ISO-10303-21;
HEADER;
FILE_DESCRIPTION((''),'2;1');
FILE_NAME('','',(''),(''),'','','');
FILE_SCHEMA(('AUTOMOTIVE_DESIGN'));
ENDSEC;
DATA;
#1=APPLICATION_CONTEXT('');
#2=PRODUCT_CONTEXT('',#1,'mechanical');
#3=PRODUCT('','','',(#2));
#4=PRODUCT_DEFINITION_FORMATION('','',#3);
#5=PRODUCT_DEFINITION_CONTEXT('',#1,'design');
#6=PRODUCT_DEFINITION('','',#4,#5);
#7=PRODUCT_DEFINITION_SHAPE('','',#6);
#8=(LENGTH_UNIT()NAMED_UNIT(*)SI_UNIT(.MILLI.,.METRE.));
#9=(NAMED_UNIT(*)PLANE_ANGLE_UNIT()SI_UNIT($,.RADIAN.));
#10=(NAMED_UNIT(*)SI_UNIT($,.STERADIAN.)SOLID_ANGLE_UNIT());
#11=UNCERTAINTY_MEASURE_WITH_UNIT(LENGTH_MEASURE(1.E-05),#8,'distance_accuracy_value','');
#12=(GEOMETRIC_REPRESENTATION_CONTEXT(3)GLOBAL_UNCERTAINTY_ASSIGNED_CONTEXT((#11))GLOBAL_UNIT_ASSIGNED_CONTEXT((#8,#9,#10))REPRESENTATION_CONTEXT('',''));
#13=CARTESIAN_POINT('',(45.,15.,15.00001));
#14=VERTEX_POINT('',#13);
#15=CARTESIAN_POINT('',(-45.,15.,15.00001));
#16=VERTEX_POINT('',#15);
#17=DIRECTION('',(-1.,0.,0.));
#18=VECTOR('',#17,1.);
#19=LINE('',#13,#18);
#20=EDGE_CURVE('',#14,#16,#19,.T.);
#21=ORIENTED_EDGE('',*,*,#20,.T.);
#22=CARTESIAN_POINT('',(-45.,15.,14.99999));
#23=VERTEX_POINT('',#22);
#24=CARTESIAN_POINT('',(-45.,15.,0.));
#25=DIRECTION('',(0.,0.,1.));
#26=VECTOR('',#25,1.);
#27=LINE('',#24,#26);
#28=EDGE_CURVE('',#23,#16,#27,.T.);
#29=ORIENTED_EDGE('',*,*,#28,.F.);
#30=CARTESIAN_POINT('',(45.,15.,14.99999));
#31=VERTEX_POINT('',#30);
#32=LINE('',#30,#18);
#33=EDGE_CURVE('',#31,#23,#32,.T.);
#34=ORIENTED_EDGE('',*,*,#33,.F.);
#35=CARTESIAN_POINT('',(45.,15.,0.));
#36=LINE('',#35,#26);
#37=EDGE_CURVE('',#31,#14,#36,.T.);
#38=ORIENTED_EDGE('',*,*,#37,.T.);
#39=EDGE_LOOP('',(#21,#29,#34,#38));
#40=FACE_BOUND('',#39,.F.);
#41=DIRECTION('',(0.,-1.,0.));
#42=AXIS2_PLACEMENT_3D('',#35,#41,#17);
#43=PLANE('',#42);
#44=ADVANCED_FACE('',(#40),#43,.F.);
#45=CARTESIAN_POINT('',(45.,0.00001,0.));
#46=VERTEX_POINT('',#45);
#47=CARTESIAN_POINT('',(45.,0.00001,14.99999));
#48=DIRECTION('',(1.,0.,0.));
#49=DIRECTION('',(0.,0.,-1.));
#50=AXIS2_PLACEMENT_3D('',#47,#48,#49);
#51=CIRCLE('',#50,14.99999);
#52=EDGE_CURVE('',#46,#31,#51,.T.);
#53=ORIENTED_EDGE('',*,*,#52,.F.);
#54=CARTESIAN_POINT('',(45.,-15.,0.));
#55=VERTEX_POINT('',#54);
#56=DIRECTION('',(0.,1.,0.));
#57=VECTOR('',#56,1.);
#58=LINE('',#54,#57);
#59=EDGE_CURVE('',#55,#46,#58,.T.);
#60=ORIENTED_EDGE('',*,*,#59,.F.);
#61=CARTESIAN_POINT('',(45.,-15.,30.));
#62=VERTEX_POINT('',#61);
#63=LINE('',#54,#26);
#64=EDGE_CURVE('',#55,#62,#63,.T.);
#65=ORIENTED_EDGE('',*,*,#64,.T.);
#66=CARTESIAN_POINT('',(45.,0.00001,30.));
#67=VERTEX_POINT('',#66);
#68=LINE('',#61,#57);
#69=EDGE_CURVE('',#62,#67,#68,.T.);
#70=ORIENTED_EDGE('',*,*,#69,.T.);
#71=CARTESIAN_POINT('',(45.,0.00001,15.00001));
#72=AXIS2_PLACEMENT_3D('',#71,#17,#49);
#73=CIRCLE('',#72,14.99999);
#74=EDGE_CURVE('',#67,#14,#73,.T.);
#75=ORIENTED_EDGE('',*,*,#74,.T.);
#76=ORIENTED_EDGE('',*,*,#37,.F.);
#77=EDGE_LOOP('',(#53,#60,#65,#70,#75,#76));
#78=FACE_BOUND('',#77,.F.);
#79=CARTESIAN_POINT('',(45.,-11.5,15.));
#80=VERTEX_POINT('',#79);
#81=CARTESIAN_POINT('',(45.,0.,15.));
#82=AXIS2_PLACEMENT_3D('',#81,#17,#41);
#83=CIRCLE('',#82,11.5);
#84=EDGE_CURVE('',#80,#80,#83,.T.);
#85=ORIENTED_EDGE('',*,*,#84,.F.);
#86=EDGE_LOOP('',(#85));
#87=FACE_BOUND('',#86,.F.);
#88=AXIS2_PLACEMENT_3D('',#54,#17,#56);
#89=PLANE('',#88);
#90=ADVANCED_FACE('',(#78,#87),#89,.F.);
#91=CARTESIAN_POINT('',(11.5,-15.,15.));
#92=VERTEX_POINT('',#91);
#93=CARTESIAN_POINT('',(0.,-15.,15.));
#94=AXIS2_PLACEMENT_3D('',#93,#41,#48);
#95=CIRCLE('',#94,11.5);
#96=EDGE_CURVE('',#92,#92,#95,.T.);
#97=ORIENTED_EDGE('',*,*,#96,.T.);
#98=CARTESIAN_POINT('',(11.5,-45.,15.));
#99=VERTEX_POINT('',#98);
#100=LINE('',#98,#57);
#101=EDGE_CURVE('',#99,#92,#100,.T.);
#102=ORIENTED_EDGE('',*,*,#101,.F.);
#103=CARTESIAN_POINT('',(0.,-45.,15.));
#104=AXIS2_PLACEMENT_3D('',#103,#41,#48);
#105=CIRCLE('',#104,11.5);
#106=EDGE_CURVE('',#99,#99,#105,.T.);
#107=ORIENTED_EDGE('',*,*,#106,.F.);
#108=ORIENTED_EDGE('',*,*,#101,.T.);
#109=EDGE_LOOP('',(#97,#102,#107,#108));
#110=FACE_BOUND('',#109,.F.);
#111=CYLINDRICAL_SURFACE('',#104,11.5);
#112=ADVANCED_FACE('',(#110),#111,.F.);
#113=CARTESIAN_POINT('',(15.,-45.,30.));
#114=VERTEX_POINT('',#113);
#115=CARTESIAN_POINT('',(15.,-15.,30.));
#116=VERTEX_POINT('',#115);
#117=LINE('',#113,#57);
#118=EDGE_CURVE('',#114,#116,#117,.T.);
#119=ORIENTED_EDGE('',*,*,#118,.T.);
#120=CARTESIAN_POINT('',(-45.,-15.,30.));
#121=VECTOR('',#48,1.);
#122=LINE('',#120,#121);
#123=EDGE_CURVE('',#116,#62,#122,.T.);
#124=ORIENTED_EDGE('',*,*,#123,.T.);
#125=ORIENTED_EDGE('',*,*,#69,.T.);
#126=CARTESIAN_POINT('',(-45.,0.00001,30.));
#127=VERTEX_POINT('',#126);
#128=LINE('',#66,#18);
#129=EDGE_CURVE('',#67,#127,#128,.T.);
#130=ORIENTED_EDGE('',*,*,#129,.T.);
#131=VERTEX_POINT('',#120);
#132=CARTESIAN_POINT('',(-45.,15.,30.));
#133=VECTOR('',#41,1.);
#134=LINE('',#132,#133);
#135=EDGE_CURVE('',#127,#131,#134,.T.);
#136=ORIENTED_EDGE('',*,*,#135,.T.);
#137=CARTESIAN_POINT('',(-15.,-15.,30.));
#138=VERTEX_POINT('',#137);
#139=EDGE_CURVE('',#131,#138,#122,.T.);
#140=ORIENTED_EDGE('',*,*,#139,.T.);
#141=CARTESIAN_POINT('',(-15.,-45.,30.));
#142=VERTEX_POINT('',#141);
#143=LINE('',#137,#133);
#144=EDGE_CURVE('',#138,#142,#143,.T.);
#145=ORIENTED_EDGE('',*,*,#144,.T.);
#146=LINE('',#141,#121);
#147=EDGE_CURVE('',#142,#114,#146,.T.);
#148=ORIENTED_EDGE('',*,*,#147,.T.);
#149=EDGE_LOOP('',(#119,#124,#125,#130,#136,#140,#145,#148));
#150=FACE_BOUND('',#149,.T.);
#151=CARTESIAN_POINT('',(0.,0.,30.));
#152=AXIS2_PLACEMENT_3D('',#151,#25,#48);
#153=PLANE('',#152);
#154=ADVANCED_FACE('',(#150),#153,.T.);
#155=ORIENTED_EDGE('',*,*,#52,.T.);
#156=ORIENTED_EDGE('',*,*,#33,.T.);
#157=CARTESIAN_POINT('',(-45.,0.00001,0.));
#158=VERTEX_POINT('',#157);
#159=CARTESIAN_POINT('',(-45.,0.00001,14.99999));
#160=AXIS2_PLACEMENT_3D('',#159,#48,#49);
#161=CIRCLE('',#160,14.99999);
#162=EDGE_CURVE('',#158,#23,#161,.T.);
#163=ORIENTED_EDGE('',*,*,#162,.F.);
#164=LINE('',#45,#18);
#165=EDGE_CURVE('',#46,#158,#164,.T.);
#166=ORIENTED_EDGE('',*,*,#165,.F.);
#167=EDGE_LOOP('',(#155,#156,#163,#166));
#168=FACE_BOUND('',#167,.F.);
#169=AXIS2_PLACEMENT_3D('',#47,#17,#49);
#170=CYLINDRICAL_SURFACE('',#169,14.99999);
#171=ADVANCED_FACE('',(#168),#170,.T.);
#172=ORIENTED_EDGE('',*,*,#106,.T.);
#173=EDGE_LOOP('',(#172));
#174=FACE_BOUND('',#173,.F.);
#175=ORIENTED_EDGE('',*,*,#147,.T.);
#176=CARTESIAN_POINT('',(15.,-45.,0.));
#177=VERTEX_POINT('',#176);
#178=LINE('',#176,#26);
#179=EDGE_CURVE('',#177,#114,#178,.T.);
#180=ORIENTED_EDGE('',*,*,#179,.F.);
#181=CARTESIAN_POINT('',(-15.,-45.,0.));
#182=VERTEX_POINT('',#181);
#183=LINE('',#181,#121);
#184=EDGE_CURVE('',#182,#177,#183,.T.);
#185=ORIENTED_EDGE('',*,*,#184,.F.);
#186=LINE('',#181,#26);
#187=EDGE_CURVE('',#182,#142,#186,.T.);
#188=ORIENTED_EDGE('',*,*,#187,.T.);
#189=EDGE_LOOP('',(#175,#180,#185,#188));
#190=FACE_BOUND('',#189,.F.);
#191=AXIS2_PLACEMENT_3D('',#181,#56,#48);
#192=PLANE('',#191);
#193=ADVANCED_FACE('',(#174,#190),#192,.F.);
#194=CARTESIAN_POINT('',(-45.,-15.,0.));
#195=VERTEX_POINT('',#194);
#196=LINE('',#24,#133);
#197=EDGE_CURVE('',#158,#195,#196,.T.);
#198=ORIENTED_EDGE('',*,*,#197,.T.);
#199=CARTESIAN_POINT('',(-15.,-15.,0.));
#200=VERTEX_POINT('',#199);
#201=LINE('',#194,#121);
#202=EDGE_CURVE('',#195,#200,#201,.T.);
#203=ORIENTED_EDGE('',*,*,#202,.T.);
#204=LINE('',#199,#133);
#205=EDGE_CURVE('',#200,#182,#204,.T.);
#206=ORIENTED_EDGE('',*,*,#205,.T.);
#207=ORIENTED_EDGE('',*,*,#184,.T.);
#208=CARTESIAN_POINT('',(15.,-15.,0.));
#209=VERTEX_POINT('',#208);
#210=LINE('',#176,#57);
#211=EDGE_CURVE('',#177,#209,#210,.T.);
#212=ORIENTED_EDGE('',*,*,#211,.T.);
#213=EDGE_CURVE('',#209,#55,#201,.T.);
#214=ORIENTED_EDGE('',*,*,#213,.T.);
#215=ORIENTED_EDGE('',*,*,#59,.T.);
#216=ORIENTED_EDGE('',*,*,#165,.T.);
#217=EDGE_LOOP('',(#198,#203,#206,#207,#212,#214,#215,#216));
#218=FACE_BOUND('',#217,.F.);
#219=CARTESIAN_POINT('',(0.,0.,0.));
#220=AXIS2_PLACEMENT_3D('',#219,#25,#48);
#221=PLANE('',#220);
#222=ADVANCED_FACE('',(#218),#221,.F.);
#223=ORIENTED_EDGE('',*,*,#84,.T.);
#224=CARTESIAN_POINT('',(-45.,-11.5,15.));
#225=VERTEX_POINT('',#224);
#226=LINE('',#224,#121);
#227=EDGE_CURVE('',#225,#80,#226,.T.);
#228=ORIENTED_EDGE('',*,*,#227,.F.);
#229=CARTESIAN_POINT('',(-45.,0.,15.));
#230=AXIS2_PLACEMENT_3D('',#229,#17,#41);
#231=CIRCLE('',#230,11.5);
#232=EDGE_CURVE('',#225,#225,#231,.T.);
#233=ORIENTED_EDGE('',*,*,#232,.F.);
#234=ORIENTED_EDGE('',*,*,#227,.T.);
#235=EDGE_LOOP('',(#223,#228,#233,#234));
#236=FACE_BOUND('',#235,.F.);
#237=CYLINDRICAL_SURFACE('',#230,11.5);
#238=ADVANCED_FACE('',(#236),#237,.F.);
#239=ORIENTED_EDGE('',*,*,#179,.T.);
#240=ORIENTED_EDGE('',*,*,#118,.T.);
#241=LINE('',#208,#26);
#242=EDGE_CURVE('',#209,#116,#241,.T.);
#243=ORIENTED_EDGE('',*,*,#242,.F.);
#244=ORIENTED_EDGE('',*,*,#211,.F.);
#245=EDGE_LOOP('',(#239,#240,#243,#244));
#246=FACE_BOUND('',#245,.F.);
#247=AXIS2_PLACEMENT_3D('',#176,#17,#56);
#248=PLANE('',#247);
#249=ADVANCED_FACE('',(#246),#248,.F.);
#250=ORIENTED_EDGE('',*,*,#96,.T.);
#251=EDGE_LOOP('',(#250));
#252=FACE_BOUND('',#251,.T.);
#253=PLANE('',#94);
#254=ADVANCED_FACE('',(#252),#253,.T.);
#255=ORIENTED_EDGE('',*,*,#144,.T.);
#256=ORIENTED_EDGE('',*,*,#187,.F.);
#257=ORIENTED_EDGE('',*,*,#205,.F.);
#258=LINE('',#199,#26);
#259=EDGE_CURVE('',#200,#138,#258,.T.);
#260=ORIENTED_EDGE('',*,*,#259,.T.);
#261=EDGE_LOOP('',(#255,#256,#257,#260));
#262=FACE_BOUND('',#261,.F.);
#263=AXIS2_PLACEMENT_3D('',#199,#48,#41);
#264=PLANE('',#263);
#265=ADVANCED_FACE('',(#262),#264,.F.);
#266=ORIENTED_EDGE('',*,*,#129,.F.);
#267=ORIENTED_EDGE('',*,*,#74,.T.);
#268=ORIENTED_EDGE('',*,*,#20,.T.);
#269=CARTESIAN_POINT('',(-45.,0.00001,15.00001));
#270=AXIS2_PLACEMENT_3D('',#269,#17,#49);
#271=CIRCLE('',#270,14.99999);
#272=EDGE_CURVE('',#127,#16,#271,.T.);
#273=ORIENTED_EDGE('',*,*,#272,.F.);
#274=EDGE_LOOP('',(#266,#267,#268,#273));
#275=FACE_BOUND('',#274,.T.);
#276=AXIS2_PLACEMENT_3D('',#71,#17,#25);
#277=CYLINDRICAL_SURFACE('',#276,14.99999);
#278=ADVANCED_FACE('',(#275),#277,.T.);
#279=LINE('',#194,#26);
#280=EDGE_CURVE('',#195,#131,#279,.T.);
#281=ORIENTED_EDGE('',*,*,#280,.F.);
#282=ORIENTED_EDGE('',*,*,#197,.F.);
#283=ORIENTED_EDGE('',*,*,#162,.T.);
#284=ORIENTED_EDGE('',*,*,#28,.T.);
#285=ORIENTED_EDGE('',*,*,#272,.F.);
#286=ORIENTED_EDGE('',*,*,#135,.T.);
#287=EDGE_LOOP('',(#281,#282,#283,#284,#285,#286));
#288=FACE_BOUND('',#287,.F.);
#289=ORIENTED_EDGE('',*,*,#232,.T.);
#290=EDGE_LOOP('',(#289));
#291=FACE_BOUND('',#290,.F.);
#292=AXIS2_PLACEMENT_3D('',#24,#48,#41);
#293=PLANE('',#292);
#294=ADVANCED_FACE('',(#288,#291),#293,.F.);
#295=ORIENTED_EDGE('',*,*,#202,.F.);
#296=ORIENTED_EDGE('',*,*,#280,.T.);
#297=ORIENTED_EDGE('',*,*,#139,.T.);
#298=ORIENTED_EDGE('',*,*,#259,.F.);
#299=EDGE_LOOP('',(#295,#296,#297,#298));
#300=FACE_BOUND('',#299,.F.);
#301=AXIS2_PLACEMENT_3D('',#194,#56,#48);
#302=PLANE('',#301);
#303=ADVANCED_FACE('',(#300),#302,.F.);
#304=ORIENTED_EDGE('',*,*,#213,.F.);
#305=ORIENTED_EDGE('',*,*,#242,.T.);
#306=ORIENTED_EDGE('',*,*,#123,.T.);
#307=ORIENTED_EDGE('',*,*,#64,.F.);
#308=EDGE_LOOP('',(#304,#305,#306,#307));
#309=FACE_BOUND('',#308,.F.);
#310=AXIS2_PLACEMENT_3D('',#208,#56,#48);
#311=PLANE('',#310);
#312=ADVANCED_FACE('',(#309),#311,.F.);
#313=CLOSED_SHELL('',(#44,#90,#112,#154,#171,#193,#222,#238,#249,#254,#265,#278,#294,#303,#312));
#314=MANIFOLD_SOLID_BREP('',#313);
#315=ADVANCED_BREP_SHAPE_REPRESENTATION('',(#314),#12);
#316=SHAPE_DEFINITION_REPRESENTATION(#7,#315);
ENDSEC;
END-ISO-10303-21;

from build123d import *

# Parameters (mm, degrees)
F1_DEPTH = 30
F3_R     = 11.5
F4_DEPTH = 30
F2_R     = 11.5
F5_DEPTH = 90
F6_R     = 14.99999


# Not quite as in the source:
# - a fillet or chamfer is up to 0.001 mm smaller than in the source, because OpenCascade refuses the exact size


with BuildPart() as f1:
    # F0 (on Top) → F1 (new body)
    with BuildSketch(Plane.XY):
        Polygon((15, -15), (45, -15), (45, 15), (-45, 15), (-45, -15), (-15, -15), align=None)
        Polygon((15, -45), (15, -15), (-15, -15), (-15, -45), (0, -45), align=None)
    extrude(amount=F1_DEPTH)

    # F3 (on face) → F4 (cut)
    with BuildSketch(Plane.XZ.offset(45)):
        with Locations((0, 15)):
            Circle(F3_R)
    extrude(amount=-F4_DEPTH, mode=Mode.SUBTRACT)

    # F2 (on face) → F5 (cut)
    with BuildSketch(Plane(origin=(-45, 0, 0), x_dir=(0, -1, 0), z_dir=(-1, 0, 0))):
        with Locations((0, 15)):
            Circle(F2_R)
    extrude(amount=-F5_DEPTH, mode=Mode.SUBTRACT)

    # F6 (radius 15 in the source; OpenCascade refuses exactly that, so slightly less here)
    f6_edges = [f1.edges().sort_by_distance(p)[0] for p in [
        (0, 15, 0),
        (0, 15, 30),
    ]]
    fillet(f6_edges, radius=F6_R)


solid = f1.part
